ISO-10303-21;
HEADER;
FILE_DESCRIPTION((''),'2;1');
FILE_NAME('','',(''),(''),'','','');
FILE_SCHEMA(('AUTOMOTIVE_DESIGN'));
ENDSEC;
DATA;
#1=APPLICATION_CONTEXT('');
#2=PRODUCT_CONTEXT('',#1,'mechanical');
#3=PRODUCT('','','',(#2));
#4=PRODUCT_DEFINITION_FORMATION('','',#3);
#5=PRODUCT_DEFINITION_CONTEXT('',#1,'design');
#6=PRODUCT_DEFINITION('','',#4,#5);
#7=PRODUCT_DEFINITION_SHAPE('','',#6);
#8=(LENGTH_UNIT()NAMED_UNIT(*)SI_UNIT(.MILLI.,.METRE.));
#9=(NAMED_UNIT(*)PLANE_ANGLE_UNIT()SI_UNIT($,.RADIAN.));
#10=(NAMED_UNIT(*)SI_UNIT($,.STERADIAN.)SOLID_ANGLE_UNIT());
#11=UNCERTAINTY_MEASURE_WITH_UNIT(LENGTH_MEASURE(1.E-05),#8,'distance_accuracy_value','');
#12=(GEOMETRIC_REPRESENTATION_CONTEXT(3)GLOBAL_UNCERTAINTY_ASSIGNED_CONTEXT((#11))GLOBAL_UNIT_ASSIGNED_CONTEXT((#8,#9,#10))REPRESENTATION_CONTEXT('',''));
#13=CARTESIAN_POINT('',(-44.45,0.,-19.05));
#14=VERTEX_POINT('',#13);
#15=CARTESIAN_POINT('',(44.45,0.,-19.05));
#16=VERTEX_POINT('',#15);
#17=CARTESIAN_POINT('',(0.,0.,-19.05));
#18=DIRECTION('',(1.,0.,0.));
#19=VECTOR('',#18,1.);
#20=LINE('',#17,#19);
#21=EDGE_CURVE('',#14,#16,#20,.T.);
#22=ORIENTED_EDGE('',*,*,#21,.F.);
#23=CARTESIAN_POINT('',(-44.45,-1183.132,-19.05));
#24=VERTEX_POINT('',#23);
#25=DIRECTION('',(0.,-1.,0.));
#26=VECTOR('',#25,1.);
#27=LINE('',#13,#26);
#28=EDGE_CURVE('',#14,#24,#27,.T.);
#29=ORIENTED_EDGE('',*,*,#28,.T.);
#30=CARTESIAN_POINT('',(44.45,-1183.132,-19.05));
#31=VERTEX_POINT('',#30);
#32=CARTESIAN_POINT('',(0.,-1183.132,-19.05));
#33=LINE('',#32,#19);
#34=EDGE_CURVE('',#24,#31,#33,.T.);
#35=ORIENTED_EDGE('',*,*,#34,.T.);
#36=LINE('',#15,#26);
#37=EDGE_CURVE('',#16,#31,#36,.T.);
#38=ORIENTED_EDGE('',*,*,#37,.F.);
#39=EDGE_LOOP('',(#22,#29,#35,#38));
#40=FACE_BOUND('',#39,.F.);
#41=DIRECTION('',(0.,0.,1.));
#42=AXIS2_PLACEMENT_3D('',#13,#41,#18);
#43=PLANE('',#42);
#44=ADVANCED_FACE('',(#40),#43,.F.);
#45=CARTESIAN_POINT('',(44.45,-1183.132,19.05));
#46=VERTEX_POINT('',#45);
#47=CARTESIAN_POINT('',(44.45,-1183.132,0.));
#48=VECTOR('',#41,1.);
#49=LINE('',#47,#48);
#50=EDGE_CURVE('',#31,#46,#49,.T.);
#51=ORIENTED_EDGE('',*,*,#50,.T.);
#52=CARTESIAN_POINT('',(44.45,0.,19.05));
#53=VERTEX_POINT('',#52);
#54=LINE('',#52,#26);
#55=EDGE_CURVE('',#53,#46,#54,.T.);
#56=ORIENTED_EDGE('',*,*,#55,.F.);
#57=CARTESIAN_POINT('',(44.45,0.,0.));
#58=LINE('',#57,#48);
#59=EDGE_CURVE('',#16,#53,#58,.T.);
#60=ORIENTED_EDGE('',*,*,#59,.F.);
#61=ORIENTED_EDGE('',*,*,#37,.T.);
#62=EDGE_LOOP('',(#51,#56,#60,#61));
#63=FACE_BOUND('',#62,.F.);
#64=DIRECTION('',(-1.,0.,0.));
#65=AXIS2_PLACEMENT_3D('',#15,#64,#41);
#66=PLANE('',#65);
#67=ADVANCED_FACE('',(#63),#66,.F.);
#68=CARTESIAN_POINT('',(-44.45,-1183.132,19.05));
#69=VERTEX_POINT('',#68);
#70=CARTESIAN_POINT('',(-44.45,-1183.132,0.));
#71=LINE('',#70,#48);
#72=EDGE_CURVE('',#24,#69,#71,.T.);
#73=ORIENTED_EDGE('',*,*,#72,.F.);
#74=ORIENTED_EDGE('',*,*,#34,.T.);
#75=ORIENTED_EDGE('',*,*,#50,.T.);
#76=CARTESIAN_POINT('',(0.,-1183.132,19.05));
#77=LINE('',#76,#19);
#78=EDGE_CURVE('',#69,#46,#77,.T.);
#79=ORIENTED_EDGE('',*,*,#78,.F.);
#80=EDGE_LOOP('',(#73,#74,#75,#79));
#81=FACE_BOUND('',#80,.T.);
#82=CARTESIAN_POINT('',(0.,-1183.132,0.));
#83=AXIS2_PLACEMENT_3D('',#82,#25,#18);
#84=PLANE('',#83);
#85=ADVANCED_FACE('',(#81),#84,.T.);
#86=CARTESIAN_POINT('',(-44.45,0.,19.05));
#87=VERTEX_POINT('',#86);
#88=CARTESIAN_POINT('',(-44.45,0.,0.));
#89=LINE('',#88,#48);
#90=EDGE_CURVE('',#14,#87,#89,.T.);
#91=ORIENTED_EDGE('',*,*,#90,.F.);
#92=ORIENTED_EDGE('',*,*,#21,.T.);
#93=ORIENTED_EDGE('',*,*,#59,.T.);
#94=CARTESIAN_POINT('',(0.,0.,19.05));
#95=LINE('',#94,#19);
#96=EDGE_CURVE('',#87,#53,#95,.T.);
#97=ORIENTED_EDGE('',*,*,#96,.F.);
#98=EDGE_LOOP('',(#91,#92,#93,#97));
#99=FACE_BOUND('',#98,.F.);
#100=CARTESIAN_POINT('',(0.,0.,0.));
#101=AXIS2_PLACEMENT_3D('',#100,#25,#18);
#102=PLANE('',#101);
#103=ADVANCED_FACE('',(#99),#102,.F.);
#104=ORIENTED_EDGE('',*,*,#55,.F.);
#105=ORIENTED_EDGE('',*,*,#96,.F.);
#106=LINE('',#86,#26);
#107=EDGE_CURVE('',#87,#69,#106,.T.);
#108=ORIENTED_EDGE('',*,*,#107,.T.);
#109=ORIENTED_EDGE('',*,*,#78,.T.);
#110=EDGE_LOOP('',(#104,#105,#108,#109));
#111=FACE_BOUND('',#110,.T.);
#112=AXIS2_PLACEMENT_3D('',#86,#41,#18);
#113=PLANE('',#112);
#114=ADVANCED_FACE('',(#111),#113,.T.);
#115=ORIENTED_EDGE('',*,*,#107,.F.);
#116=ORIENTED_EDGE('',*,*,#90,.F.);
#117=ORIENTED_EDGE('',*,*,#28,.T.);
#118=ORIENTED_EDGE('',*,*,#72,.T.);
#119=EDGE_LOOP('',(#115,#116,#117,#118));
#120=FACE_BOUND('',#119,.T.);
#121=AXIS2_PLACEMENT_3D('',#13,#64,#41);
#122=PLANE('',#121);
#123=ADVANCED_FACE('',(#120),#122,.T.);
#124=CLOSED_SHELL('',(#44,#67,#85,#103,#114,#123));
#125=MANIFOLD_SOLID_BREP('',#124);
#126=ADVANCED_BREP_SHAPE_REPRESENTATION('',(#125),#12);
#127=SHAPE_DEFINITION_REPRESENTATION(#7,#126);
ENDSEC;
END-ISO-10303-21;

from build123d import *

# Parameters (mm, degrees)
F1_W     = 88.9
F1_H     = 38.1
F2_DEPTH = 1183.132


# Not quite as in the source:
# - a variable given as a bare number and used for a length is read in inches; the dataset says mm whatever the document's units were


with BuildPart() as f2:
    # F1 (on Front) → F2 (new body)
    with BuildSketch(Plane.XZ):
        Rectangle(F1_W, F1_H)
    extrude(amount=F2_DEPTH)


solid = f2.part
